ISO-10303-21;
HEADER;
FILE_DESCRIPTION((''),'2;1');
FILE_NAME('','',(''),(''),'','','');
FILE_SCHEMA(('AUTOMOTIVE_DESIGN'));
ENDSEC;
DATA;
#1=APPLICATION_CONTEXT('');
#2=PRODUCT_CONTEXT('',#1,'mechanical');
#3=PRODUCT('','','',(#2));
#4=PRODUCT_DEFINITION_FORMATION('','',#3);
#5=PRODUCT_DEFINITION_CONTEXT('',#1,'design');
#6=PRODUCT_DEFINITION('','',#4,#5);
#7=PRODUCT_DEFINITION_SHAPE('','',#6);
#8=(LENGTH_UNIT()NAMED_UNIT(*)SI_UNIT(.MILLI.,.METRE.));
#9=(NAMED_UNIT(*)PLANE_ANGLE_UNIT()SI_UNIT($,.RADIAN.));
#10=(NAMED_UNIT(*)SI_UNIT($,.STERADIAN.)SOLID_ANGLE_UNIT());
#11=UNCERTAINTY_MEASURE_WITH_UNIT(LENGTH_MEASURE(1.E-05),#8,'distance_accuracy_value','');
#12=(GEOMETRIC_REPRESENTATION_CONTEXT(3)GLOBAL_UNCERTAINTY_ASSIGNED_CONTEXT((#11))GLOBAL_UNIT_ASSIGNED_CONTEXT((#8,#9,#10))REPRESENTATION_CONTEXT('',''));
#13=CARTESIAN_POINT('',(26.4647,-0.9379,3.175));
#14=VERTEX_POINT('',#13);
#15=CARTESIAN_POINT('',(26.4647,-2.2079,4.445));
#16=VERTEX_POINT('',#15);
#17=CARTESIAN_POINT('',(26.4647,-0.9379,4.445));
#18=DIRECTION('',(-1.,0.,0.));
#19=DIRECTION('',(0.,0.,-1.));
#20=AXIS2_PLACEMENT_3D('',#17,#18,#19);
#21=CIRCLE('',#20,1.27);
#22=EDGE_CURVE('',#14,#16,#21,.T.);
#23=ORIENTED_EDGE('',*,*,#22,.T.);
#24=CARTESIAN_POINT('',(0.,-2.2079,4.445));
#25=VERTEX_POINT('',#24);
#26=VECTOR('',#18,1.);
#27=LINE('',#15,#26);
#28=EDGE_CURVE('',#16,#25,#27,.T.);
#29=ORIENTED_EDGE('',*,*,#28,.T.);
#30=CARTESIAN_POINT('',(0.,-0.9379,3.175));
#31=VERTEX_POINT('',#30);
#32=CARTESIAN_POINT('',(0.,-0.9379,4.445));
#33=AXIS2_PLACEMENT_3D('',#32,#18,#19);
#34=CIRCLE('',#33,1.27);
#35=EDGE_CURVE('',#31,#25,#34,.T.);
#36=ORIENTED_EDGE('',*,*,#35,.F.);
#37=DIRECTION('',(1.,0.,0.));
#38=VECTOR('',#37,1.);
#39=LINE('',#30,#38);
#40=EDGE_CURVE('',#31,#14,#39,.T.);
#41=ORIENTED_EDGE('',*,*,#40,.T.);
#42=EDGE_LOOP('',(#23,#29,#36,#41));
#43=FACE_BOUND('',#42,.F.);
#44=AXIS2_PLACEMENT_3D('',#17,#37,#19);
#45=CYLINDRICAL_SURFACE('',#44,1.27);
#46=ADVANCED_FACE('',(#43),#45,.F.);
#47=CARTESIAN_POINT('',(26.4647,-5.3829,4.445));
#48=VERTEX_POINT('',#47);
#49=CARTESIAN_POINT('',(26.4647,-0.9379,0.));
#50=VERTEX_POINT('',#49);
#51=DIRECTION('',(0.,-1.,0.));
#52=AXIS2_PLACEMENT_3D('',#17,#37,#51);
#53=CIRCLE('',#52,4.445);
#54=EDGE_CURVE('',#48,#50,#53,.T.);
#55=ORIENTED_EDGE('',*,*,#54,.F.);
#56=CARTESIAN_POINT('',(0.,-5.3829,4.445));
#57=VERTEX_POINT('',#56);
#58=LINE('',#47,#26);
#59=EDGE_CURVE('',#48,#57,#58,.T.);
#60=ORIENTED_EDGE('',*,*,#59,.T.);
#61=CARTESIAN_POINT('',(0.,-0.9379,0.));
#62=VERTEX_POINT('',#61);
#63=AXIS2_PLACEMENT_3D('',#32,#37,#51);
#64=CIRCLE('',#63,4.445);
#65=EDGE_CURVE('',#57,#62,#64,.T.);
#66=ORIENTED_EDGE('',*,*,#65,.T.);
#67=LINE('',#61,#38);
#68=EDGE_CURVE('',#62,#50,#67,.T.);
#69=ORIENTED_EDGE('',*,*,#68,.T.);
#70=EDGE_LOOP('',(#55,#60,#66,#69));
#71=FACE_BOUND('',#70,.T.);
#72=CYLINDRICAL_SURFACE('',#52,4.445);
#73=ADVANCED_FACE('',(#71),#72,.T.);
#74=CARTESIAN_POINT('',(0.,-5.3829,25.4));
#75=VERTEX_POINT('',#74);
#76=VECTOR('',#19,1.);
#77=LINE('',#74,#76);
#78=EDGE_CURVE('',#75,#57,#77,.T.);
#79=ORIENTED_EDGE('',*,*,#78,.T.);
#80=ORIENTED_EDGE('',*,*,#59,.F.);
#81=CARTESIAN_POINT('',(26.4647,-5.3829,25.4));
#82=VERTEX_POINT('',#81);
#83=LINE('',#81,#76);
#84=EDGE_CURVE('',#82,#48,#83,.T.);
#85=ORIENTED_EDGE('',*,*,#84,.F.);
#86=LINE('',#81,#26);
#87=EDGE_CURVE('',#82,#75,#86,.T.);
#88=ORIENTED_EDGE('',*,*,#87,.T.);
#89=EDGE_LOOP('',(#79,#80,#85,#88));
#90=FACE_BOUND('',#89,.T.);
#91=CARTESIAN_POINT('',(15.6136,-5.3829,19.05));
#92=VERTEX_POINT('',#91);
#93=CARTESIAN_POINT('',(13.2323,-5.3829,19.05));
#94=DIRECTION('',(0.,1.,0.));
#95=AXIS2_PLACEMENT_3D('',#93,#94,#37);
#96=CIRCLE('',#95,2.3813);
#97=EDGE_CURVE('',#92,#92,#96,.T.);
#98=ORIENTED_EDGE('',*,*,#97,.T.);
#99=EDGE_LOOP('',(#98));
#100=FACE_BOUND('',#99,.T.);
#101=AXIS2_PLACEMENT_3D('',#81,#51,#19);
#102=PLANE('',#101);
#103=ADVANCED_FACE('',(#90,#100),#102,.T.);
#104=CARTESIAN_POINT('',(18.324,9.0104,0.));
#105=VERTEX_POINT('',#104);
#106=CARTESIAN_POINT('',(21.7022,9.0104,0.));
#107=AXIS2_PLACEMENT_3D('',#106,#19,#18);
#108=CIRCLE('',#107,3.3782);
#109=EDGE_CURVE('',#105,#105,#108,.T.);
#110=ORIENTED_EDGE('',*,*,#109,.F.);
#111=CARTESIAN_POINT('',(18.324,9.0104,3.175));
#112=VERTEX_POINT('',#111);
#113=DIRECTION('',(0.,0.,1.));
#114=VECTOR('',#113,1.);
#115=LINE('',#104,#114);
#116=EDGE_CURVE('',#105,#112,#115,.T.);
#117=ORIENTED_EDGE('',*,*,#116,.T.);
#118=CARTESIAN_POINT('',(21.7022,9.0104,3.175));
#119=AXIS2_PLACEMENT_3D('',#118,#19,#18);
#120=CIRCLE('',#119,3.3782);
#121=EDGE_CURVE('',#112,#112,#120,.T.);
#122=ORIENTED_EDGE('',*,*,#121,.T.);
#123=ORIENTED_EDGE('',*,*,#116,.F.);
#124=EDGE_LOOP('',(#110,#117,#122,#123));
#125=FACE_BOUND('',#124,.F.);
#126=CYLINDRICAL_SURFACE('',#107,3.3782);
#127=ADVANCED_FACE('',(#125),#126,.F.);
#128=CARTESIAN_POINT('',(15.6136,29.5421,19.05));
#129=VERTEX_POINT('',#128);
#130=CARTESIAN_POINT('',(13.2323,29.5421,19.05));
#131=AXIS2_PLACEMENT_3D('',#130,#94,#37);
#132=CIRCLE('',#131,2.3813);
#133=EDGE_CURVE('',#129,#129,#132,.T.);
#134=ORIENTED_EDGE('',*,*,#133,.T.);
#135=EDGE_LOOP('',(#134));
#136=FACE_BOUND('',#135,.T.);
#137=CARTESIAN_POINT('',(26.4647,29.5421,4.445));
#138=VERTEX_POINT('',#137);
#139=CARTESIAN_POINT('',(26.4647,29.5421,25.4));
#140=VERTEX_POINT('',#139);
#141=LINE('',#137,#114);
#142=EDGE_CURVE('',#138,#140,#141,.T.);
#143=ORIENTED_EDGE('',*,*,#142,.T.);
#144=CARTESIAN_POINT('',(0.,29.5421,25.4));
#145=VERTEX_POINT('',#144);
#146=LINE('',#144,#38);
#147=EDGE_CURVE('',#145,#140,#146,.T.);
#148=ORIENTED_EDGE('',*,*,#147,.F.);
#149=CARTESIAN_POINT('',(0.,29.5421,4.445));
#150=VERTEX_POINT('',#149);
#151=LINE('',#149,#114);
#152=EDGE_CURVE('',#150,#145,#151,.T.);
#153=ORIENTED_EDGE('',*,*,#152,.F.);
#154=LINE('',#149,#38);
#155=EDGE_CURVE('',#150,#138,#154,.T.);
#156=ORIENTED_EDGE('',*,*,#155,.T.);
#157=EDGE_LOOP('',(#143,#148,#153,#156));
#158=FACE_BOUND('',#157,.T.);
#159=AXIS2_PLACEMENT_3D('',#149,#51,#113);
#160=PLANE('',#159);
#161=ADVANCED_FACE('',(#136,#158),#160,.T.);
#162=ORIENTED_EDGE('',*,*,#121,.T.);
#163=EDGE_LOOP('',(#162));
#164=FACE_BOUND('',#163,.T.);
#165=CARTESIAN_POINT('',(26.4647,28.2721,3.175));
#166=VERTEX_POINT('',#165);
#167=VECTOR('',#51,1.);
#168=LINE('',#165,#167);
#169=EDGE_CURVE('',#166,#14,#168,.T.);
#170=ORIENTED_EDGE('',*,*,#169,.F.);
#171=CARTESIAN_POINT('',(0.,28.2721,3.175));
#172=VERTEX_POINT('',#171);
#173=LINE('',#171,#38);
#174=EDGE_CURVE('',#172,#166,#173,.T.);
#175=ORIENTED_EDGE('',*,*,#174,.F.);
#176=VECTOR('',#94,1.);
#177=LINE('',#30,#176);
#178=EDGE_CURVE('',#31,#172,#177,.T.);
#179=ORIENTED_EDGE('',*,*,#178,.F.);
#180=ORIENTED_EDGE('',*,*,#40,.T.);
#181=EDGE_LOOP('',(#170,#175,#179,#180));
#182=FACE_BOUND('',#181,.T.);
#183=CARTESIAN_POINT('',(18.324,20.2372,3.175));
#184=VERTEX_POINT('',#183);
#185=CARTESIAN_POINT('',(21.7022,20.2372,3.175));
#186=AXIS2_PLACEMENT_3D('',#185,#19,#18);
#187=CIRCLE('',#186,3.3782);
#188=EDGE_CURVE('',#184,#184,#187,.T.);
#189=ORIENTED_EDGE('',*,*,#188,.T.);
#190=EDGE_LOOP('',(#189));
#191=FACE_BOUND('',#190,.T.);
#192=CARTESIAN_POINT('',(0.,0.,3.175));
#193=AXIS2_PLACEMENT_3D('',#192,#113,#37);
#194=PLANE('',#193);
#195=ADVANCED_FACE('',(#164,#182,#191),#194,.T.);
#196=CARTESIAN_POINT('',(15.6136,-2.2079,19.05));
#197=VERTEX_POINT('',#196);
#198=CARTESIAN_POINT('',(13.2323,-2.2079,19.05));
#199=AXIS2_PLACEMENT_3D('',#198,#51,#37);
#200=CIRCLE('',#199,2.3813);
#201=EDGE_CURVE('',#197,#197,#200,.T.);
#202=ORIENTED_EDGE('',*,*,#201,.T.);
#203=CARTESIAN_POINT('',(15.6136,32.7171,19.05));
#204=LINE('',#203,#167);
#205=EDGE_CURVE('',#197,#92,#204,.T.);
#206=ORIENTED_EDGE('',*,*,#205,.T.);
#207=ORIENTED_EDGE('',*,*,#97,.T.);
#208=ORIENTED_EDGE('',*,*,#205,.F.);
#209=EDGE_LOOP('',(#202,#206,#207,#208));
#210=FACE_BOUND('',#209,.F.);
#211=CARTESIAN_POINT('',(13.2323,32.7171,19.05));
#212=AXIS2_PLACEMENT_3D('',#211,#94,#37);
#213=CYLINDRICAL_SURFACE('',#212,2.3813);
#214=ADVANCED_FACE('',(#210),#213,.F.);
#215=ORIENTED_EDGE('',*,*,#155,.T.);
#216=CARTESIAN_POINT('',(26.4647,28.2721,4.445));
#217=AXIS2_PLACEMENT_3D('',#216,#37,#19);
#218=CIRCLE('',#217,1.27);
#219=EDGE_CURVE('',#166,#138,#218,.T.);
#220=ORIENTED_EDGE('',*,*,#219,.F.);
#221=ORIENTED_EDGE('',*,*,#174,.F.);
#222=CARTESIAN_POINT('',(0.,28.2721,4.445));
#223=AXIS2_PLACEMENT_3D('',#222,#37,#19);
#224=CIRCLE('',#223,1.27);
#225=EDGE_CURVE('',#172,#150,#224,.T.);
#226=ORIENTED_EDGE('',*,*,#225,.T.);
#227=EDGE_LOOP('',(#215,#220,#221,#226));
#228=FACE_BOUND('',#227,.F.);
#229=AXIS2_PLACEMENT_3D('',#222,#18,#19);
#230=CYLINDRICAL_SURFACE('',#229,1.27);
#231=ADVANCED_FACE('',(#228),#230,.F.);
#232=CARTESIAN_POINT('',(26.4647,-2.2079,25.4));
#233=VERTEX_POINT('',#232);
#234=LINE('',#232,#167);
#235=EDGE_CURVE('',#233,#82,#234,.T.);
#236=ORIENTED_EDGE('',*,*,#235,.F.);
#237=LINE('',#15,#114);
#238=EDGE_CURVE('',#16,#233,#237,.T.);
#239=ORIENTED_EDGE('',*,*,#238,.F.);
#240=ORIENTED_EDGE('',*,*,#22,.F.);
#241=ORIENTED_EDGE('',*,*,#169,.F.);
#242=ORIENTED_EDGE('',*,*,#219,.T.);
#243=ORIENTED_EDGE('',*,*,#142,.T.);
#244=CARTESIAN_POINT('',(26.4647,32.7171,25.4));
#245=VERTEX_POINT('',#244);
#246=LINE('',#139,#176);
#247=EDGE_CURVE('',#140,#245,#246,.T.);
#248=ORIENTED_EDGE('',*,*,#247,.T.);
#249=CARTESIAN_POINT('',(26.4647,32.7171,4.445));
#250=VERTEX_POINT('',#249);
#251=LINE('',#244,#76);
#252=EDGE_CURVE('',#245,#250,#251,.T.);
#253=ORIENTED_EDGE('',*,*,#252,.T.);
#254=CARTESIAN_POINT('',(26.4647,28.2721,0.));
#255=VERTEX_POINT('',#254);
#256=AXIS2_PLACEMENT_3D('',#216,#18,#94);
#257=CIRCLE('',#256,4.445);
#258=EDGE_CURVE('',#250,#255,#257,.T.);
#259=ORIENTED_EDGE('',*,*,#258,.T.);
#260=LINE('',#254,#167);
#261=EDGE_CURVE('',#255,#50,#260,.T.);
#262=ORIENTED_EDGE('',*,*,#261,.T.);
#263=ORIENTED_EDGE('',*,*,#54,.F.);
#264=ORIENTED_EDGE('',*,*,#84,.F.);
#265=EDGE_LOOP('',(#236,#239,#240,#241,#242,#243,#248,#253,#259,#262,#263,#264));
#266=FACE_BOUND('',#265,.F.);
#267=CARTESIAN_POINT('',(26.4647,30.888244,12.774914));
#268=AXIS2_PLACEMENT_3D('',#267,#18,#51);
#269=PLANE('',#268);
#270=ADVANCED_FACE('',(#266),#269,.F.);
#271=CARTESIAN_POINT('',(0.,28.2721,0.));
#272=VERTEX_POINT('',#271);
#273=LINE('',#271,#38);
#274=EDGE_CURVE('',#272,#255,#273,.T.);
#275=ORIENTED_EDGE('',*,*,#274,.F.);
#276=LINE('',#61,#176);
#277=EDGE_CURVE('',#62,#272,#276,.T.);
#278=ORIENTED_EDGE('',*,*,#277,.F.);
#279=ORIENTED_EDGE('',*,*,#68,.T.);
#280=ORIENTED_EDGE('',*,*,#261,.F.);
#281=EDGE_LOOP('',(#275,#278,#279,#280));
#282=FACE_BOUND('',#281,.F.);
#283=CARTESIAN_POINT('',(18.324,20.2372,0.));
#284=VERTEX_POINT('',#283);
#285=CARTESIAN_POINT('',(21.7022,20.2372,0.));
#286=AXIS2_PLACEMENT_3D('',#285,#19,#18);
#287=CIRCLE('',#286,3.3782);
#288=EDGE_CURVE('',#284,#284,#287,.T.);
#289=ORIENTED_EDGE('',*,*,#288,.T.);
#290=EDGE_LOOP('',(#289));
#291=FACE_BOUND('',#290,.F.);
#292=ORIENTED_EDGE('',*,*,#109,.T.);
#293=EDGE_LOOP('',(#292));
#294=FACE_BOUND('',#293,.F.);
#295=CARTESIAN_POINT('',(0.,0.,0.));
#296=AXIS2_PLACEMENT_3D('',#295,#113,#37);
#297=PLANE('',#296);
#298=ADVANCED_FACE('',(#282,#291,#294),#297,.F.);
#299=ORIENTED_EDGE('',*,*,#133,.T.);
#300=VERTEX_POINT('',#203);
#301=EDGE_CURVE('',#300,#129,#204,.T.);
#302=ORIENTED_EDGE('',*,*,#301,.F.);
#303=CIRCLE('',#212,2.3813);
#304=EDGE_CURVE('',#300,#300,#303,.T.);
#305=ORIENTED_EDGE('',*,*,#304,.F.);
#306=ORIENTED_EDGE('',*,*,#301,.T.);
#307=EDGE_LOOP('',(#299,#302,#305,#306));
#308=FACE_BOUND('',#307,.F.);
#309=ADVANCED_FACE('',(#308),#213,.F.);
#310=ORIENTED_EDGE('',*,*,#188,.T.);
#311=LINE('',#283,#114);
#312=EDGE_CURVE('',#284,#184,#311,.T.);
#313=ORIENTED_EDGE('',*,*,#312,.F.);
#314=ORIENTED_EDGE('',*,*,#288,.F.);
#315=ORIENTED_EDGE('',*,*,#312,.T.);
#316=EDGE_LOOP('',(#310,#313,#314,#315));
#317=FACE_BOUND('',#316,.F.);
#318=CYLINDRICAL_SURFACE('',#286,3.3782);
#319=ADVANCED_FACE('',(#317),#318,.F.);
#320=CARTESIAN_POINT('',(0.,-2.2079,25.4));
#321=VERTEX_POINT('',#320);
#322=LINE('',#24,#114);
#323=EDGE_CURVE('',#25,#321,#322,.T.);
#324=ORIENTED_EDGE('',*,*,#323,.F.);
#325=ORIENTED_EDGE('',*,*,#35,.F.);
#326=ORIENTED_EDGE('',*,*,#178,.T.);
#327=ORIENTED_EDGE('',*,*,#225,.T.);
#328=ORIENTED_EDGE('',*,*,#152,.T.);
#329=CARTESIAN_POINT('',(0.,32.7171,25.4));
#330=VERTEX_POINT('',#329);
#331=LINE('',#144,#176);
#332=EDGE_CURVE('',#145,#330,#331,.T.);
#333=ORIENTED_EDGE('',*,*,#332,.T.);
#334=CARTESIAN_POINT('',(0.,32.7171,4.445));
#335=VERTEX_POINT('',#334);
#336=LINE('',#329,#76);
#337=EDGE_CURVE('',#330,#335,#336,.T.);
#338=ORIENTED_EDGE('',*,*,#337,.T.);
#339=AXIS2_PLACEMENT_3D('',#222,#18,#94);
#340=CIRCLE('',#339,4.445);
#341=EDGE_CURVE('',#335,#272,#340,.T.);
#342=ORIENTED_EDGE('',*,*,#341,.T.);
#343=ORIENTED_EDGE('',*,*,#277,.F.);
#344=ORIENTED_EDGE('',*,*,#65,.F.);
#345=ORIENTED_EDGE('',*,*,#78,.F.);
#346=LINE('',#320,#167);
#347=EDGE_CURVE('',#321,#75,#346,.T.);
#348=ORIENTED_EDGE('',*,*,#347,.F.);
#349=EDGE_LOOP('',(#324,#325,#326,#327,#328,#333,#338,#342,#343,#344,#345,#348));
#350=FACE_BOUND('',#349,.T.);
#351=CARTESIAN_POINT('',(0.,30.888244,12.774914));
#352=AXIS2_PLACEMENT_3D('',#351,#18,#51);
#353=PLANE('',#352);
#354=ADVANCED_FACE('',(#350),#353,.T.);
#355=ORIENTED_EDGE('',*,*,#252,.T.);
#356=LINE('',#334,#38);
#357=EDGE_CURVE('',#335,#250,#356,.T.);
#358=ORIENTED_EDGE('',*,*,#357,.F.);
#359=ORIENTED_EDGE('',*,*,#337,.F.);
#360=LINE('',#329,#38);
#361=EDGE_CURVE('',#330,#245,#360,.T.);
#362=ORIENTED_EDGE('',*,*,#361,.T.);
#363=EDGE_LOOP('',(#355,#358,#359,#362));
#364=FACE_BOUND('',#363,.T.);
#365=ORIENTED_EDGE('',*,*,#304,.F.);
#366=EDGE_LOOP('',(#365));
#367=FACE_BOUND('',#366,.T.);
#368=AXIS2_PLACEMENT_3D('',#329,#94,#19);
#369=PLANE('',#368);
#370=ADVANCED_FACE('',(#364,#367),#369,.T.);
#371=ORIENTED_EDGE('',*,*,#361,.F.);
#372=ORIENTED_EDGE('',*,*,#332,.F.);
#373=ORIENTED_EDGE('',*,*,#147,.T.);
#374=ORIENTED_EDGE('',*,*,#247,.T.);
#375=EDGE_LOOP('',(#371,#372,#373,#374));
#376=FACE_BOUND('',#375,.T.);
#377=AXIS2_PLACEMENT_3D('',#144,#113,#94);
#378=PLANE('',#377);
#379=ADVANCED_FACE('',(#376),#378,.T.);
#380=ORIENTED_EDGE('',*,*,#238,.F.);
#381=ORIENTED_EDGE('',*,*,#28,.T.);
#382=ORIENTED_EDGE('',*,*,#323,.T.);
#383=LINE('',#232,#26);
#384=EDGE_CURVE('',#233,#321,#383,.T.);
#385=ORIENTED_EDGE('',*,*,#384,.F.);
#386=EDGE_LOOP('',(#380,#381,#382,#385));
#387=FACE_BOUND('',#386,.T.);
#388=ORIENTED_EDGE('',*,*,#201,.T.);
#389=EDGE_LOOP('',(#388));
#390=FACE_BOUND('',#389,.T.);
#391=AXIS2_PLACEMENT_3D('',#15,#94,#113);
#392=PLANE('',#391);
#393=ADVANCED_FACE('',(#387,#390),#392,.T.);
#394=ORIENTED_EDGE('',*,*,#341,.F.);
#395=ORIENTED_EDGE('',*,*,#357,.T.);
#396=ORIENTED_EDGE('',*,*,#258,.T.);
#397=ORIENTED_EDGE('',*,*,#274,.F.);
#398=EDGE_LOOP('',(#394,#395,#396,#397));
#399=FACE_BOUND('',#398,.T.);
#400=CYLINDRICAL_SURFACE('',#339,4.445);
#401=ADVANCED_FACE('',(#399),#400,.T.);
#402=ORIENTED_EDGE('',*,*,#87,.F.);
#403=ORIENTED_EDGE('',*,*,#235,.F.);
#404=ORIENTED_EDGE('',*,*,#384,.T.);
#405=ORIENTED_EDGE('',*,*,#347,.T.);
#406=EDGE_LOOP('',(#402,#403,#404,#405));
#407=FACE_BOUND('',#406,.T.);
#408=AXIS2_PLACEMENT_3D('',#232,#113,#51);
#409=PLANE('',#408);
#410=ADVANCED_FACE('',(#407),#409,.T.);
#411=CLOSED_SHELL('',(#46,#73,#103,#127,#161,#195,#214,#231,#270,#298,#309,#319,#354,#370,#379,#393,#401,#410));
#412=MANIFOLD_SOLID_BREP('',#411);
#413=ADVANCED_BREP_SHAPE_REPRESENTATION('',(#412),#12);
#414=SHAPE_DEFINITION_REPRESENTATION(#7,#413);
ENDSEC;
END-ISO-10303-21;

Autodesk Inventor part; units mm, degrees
ref_plane "YZ Plane" through (0, 0, 0) normal (1, 0, 0) x (0, 1, 0)
ref_plane "XZ Plane" through (0, 0, 0) normal (0, 1, 0) x (-1, 0, 0)
ref_plane "XY Plane" through (0, 0, 0) normal (0, 0, 1) x (1, 0, 0)
sketch "Sketch1" plane through (0, 0, 0) normal (0, 0, 1) x (1, 0, 0)
  circle A0 centre (5.881, 13.6671) radius 3.1287
  circle A1 centre (20.5836, 13.6671) radius 3.1287
  line L0 (0, -0.9379) -> (26.4647, -0.9379)
  line L1 (26.4647, 28.2721) -> (26.4647, -0.9379)
  line L2 (0, 28.2721) -> (26.4647, 28.2721)
  line L3 (0, -0.9379) -> (0, 28.2721)
  point P0 (0, 0)
  dimension "d4" = 14.7026
  dimension "d5" = 29.21
  dimension "d21" = 14.605
extrude "Plate1" add sketch "Sketch1" along normal blind 3.175 contours A0 | A1 | L3 L2 L1 L0
sketch "Sketch2" plane through (0, 29.5421, 4.445) normal (0, 1, 0) x (-1, 0, 0)
  line L0 (-26.4647, 0) -> (0, 0)
  line L1 (0, 0) -> (0, 20.955)
  line L2 (0, 20.955) -> (-26.4647, 20.955)
  line L3 (-26.4647, 20.955) -> (-26.4647, 0)
edge flange "Flange1" height 25.4 angle 90 thickness 3.175 bend radius 1.27 thickness toward (0, 1, 0) relief straight relief width 3.175 relief depth 1.5875 corner gap 3.175 corner form 0 edges at (13.2323, 28.2721, 3.175) (13.2323, -0.9379, 3.175) wall of the first edge with corners at (26.4647, 29.5421, 4.445) (0, 29.5421, 4.445) (0, 29.5421, 25.4) (26.4647, 29.5421, 25.4)
bend "Bend1"
corner "Corner1"
sketch "Sketch3" plane through (0, 32.7171, 25.4) normal (0, 1, 0) x (1, 0, 0)
  line L0 (26.4647, 0) -> (0, 0) projected
  line L1 (26.4647, 20.955) -> (26.4647, 0) projected
  line L2 (13.2323, 0) -> (13.2323, 6.35)
  circle A0 centre (13.2323, 6.35) radius 2.3813
  point P0 (0, 25.4)
  dimension "d17" = 6.35
  dimension "d18" = 4.7625
extrude "Extrusion1" cut sketch "Sketch3" against normal blind 76174.6
sketch "Sketch7" plane through (0, 0, 0) normal (0, 0, -1) x (-1, 0, 0)
  circle A0 centre (-21.7022, 20.2372) radius 3.3782 projected
  circle A1 centre (-21.7022, 9.0104) radius 3.3782 projected
  point P0 (0, 0)
extrude "Cut3" cut sketch "Sketch7" against normal blind 3.175
sketch "Sketch8" plane through (0, 0, 3.175) normal (0, 0, 1) x (1, 0, 0)
  circle A0 centre (21.7022, 20.2372) radius 3.3782 projected
  circle A1 centre (21.7022, 9.0104) radius 3.3782 projected
  line L0 (0, -0.9379) -> (0, 28.2721) projected
  line L1 (26.4647, -0.9379) -> (0, -0.9379) projected
  line L2 (26.4647, 28.2721) -> (26.4647, -0.9379) projected
  line L3 (0, 28.2721) -> (26.4647, 28.2721) projected
  point P0 (0, 0)
equation "\"d26\" = Thickness"
equation "\"d7\" = BendReliefWidth"
equation "\"d8\" = BendReliefDepth"
equation "\"d9\" = MinimumRemnant"
equation "\"d10\" = BendRadius"
equation "\"d14\" = CornerReliefSize"
equation "\"d15\" = GapSize"
equation "\"d16\" = JacobiRadiusSize"
equation "\"BendRadius\" = Thickness"
equation "\"BendReliefWidth\" = Thickness"
equation "\"BendReliefDepth\" = 0.5 * Thickness"
equation "\"CornerReliefSize\" = 4 * Thickness"
equation "\"MinimumRemnant\" = 2 * Thickness"
equation "\"TransitionRadius\" = BendRadius"
equation "\"JacobiRadiusSize\" = Thickness"
equation "\"GapSize\" = Thickness"
equation "\"d6\" = BendRadius"
equation "\"Thickness\" = 3.175"
properties part number "pulley mount. actual sideways ipt"
